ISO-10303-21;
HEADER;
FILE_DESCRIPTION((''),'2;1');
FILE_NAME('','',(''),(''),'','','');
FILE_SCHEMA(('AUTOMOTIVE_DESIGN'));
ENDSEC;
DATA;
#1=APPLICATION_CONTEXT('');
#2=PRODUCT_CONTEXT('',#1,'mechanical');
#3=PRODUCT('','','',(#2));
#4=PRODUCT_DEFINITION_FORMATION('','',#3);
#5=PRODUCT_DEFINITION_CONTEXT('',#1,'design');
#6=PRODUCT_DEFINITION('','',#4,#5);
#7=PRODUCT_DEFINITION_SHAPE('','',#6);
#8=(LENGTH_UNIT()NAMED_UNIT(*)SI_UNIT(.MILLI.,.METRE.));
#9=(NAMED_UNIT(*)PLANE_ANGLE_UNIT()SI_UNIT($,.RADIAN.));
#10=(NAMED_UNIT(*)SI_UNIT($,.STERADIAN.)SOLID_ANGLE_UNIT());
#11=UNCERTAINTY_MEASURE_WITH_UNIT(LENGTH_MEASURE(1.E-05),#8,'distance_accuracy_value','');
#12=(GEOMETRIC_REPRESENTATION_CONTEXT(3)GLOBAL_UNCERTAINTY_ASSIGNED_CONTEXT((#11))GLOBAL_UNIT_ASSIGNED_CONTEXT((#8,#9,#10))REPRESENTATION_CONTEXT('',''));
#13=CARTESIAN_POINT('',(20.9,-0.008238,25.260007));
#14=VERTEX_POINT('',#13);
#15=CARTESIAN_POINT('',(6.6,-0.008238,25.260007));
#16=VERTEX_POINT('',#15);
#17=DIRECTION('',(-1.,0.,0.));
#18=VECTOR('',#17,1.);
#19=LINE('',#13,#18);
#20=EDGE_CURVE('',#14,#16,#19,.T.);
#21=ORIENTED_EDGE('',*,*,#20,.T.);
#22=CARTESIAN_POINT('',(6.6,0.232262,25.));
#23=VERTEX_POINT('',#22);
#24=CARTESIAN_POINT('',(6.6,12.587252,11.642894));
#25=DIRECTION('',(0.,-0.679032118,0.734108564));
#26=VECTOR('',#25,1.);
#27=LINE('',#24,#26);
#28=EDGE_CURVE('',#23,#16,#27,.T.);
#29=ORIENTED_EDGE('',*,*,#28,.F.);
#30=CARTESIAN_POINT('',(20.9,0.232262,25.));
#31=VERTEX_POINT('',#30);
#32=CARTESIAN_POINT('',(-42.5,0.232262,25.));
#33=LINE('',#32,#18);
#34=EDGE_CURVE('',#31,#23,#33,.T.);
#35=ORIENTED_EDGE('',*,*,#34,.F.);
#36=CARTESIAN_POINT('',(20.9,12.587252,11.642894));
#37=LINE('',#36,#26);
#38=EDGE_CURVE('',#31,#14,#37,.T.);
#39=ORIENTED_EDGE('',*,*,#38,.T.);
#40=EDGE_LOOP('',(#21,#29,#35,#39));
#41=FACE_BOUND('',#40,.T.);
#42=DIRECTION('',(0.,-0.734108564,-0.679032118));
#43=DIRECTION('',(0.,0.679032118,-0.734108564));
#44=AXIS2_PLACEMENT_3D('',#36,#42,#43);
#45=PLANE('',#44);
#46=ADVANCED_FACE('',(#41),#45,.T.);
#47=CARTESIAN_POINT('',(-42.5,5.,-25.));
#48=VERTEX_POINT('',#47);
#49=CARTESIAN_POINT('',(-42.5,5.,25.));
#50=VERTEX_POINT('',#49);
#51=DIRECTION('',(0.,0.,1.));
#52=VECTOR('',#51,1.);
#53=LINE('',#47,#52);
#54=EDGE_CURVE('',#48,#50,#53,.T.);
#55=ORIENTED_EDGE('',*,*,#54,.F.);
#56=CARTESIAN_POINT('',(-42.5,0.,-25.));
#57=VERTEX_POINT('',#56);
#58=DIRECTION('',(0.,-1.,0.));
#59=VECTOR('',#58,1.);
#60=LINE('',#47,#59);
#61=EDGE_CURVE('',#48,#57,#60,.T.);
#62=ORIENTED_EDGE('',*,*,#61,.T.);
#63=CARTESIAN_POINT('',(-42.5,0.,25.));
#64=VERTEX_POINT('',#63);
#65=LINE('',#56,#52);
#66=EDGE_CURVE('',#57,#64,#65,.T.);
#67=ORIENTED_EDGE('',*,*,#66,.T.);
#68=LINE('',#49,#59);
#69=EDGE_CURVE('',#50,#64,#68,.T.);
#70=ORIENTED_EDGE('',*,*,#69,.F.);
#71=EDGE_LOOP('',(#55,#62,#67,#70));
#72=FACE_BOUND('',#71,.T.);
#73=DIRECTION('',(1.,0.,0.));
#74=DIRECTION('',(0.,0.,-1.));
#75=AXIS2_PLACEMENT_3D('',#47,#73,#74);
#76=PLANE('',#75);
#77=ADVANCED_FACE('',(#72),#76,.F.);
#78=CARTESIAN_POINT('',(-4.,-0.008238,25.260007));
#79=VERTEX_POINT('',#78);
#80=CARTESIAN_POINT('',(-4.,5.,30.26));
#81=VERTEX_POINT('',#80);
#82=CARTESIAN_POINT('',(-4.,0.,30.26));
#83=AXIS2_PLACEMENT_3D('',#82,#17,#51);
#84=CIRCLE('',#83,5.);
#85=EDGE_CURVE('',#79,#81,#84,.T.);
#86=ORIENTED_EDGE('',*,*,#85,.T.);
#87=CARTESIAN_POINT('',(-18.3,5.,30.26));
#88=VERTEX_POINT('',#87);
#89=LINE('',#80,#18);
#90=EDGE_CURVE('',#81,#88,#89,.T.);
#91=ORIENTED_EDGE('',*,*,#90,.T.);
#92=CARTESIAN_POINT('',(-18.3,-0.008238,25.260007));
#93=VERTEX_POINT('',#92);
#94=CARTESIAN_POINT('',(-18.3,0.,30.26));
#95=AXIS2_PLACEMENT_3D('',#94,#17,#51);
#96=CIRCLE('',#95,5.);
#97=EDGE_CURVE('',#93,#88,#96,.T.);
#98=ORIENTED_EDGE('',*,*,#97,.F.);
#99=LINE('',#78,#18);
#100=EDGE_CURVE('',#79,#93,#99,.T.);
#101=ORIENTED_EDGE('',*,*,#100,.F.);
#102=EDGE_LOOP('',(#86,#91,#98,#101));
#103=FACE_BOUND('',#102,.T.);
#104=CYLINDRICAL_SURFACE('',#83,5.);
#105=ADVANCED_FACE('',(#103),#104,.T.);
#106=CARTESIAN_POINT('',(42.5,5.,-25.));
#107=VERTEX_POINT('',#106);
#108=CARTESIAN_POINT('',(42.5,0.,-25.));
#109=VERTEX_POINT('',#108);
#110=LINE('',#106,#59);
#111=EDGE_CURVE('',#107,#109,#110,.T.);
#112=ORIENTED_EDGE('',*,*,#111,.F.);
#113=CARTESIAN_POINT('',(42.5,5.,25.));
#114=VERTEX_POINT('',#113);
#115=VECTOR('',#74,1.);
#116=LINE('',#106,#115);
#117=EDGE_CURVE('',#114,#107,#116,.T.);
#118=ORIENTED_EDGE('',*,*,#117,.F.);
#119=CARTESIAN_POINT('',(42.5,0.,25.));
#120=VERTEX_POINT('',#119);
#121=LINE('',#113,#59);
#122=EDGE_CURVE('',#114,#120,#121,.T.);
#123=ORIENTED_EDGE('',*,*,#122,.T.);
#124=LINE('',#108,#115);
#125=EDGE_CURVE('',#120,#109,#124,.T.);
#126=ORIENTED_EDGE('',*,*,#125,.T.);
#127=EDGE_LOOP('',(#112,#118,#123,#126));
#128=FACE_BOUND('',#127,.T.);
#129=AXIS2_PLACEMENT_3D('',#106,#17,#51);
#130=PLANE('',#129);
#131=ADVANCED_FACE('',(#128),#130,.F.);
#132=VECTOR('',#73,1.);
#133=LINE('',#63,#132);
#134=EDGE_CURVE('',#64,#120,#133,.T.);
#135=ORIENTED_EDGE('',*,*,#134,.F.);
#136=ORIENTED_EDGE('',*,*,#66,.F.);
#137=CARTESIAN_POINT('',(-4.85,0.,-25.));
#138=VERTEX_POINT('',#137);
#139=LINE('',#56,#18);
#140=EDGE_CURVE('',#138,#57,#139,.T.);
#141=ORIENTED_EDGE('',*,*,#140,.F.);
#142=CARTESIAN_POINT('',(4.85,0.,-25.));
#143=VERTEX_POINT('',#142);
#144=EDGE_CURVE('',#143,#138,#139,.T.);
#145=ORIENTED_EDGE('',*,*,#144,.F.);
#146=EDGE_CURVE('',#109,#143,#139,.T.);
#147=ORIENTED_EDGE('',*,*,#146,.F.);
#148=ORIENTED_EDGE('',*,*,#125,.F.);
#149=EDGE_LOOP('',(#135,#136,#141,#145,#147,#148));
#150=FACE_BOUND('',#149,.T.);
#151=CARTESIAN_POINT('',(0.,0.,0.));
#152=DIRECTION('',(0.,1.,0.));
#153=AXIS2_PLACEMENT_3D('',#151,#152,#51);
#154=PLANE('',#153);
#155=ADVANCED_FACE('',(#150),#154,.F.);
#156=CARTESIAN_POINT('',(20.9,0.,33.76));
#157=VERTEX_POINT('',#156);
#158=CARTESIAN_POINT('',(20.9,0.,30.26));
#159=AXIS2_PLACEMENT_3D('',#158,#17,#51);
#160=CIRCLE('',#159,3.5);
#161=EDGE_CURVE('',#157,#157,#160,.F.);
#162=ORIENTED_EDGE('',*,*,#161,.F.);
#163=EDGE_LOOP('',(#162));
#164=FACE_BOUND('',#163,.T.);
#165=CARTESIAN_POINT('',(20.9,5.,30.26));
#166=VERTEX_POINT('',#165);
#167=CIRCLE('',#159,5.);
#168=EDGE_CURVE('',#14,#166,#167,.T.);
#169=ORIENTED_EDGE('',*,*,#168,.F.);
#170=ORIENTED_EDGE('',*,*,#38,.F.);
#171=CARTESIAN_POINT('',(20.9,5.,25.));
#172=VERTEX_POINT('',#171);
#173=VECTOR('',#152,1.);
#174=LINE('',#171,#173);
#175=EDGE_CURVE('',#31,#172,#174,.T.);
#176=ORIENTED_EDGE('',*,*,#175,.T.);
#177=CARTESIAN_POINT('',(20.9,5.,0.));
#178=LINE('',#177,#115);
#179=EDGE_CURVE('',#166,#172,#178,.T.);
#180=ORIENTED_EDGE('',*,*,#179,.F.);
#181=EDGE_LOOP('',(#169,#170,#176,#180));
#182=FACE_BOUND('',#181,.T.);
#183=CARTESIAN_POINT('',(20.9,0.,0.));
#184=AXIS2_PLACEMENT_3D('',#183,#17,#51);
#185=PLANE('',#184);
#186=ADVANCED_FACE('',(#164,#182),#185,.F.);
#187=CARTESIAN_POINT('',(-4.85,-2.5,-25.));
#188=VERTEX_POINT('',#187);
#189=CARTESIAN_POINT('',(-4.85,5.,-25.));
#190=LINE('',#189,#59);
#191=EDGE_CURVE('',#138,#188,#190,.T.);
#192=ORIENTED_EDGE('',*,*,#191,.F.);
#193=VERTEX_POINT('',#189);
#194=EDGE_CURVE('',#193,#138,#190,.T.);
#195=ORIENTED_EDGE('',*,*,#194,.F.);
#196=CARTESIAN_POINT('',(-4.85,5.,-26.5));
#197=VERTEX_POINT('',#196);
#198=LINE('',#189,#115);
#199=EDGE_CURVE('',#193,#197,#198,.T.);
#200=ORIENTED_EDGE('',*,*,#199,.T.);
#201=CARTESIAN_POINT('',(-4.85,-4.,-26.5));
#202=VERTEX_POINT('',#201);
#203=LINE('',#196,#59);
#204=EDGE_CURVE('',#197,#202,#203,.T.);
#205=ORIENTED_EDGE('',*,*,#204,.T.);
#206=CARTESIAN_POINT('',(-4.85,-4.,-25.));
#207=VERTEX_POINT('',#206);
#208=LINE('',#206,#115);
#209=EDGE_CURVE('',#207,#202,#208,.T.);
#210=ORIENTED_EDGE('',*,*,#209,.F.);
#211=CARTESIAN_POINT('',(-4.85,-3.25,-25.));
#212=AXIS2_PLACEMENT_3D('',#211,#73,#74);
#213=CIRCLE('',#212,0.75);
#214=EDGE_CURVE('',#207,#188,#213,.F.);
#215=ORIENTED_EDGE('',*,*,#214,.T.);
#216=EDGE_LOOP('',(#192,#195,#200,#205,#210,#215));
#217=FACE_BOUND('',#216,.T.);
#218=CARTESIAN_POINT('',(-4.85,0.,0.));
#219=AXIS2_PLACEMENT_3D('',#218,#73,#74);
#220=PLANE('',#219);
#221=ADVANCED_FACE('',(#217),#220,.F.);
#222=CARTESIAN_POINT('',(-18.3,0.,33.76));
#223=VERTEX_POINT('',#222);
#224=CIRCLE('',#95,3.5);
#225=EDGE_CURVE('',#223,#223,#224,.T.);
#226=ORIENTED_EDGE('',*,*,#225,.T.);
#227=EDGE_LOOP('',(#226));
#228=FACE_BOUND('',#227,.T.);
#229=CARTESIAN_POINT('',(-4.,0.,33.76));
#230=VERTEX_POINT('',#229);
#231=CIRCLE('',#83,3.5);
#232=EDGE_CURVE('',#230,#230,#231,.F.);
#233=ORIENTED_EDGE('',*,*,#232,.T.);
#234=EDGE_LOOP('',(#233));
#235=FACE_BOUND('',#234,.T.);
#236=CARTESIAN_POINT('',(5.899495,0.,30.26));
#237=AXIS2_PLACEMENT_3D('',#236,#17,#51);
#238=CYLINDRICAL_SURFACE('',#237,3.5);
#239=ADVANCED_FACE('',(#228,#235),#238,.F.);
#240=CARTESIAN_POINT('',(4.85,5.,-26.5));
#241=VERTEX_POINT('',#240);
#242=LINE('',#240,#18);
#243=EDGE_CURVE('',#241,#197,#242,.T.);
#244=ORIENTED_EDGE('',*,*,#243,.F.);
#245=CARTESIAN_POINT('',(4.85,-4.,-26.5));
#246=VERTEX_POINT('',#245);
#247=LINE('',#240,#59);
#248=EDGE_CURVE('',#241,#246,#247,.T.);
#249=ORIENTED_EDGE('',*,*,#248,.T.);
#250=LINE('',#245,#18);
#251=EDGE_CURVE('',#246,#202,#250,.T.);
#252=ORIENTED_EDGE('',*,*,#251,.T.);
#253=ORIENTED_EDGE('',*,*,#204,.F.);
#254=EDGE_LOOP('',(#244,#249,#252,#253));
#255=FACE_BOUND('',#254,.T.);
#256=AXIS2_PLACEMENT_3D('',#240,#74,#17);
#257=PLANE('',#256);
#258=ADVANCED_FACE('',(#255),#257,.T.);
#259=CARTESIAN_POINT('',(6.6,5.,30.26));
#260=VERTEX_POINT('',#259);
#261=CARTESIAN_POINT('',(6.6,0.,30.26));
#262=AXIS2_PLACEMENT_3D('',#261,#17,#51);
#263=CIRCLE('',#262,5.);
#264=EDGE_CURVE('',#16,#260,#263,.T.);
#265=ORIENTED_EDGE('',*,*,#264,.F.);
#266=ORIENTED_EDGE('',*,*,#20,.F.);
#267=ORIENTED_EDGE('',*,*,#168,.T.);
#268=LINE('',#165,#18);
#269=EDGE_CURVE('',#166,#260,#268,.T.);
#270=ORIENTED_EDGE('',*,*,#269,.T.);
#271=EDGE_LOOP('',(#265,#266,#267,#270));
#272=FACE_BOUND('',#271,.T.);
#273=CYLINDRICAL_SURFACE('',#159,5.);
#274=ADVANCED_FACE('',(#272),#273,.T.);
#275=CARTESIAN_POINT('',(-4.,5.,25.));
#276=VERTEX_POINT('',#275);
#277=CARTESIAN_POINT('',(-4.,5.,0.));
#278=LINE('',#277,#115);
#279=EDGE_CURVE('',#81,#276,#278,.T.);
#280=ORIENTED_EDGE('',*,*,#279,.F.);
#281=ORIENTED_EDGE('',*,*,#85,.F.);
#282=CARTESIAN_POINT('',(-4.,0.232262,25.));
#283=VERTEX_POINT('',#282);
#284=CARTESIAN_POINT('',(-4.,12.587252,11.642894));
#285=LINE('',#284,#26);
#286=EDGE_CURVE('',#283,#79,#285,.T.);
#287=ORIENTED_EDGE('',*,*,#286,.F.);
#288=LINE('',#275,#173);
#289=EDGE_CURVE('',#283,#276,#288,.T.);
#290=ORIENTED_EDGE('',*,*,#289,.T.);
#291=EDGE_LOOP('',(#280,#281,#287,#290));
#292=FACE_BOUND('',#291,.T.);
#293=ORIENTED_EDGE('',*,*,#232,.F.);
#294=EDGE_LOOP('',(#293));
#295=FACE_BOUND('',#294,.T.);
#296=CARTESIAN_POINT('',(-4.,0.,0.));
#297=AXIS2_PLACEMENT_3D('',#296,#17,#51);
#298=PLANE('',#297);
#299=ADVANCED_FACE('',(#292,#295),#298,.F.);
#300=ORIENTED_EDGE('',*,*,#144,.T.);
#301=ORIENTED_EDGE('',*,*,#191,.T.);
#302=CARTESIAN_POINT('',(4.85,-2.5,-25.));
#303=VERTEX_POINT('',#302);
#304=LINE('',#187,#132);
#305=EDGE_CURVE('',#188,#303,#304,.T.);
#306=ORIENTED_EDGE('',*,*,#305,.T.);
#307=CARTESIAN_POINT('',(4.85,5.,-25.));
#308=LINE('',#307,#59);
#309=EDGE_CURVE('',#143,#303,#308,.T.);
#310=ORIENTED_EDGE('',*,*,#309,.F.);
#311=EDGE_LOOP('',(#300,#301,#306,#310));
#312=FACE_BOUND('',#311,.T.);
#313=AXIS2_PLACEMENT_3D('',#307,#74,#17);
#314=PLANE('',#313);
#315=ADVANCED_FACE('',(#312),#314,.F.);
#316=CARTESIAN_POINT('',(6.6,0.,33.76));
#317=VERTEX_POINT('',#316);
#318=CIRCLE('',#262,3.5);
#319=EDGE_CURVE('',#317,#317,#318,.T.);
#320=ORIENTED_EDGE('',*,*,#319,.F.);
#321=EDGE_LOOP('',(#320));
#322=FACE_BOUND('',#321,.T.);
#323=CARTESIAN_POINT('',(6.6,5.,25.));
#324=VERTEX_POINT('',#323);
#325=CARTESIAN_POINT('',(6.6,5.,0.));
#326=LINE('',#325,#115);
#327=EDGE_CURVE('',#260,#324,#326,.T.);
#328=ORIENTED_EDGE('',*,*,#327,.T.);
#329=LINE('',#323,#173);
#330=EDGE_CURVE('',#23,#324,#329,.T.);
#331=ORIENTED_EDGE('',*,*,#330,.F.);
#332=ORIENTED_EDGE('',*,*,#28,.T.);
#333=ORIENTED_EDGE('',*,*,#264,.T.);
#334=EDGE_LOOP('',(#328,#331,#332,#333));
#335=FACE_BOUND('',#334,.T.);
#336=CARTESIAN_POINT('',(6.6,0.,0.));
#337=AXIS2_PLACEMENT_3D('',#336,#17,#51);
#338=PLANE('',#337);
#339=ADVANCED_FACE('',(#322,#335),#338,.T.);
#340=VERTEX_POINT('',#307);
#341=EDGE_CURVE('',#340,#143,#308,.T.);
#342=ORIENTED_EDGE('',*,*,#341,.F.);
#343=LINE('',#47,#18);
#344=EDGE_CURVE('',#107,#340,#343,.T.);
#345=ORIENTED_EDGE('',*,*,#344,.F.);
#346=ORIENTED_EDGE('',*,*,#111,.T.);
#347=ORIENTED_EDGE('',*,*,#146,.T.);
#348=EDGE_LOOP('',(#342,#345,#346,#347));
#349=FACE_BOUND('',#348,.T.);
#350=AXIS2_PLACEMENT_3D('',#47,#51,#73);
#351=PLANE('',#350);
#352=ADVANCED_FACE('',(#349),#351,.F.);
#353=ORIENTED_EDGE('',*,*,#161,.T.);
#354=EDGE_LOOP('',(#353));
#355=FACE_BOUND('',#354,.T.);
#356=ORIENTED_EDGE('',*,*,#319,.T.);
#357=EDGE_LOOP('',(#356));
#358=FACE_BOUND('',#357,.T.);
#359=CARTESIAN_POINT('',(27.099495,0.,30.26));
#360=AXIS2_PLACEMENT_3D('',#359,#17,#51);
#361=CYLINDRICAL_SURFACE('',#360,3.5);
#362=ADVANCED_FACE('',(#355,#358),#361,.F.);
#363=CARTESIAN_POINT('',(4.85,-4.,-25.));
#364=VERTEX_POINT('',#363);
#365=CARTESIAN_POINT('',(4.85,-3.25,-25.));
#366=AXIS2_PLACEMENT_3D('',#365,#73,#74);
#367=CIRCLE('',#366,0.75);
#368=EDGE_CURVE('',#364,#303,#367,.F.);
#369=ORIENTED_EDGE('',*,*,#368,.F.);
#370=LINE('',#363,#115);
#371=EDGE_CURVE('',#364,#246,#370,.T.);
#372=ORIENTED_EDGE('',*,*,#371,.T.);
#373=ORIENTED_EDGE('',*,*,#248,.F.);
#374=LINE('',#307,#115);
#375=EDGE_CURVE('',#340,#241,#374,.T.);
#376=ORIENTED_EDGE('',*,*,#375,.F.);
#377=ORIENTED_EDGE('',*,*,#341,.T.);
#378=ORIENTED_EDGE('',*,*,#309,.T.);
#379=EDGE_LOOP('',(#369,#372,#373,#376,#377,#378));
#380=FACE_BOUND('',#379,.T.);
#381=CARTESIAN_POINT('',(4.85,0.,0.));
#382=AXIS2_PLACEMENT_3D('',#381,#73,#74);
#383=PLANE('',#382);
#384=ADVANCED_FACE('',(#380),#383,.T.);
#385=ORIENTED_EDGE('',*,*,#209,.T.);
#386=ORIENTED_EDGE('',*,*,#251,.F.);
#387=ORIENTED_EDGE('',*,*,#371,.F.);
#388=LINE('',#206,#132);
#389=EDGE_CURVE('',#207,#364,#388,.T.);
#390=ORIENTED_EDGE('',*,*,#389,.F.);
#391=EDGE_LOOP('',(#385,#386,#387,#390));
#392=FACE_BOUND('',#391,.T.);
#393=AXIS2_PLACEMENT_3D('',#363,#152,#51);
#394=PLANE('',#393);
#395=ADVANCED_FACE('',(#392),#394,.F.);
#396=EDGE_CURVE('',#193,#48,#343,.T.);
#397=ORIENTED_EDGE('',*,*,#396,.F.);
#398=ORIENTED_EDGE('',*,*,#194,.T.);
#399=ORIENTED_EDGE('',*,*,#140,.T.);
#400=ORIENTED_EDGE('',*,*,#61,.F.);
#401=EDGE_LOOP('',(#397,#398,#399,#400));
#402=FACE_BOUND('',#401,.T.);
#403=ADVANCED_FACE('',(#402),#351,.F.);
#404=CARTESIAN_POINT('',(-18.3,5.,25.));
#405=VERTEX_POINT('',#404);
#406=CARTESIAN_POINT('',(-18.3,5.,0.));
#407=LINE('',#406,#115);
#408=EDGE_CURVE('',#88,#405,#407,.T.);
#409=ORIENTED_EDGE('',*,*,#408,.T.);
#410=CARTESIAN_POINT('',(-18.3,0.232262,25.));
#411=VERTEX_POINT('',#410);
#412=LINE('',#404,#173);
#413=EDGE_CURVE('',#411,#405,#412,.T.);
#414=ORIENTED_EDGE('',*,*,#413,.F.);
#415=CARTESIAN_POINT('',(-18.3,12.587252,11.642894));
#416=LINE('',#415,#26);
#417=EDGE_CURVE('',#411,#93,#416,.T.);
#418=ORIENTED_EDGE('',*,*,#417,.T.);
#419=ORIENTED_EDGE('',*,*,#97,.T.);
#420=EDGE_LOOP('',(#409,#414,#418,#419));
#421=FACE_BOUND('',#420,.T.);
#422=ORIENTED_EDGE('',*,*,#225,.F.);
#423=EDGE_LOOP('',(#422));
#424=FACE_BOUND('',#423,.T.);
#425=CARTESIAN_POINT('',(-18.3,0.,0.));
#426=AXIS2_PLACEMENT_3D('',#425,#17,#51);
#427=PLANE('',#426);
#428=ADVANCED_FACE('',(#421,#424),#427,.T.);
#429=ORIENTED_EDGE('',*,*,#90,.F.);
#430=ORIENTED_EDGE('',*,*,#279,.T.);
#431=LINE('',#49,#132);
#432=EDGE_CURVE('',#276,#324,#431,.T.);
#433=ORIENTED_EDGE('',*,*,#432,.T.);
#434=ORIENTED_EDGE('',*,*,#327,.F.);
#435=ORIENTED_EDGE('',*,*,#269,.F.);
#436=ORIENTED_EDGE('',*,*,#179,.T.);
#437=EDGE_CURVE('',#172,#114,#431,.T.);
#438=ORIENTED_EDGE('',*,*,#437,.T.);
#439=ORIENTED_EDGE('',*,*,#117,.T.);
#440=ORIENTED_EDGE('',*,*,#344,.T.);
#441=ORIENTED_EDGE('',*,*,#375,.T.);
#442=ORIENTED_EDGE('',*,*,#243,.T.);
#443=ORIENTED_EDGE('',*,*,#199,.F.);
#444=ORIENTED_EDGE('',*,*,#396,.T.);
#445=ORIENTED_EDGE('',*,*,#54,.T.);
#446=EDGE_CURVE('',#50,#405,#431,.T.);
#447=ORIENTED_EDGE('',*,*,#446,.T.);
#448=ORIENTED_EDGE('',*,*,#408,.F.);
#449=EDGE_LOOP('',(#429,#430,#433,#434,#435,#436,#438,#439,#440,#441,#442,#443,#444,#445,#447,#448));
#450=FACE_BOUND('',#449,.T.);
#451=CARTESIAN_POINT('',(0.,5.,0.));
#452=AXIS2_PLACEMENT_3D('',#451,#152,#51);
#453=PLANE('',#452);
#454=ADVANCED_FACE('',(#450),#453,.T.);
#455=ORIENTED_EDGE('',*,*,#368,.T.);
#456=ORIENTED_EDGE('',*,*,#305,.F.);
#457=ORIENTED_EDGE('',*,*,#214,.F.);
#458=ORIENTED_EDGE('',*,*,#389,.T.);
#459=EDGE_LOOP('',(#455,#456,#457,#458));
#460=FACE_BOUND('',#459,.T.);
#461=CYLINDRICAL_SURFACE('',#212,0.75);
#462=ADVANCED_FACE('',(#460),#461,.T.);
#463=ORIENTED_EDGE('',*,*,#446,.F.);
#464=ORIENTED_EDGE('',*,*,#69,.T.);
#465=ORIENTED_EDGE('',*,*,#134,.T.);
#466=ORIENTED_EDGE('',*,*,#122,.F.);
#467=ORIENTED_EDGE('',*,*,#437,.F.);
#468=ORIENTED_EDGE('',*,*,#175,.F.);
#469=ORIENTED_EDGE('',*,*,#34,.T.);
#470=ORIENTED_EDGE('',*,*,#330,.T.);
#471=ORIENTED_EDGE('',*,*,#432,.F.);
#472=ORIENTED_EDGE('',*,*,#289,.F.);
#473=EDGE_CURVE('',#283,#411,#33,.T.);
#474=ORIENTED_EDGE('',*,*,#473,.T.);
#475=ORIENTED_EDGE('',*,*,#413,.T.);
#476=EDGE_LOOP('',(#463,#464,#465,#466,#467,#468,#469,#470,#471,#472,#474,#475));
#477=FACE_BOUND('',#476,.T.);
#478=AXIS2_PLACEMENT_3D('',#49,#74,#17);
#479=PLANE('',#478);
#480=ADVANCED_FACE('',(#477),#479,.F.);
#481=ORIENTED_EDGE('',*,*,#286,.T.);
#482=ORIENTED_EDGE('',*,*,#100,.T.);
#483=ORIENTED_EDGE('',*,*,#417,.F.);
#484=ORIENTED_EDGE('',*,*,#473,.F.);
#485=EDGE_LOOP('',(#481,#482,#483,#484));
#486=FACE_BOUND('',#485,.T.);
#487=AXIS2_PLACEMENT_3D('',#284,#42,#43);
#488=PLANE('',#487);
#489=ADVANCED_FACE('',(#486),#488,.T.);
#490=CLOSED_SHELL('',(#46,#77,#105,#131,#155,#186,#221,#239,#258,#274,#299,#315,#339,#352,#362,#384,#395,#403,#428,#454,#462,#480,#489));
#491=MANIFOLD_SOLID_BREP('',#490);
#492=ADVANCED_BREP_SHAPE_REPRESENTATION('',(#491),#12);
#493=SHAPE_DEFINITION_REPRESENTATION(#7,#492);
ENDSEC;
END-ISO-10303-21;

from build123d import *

# Parameters (mm, degrees)
ESQUISSE1_W                = 85
ESQUISSE1_H                = 50
BOSS_EXTRU_1_DEPTH         = 5
BOSS_EXTRU_2_START         = -14.3
BOSS_EXTRU_2_DEPTH         = 14.3
ESQUISSE3_R                = 3.5
ENL_V_MAT_EXTRU_1_DEPTH    = 14.3
R_P_TITION_LIN_AIRE2_COUNT = 2
R_P_TITION_LIN_AIRE2_PITCH = 24.9
BOSS_EXTRU_3_DEPTH         = 4.85
BOSS_EXTRU_3_DEPTH_BACK    = 4.85


# Read off the part's stored shape, not the designer's step: Boss.-Extru.2
with BuildPart() as part:
    # Esquisse1 → Boss.-Extru.1 (new body)
    with BuildSketch(Plane(origin=(0, 0, 0), x_dir=(1, 0, 0), z_dir=(0, 1, 0))):
        Rectangle(ESQUISSE1_W, ESQUISSE1_H)
    extrude(amount=BOSS_EXTRU_1_DEPTH)

    # Boss.-Extru.2 outline → Boss.-Extru.2 (add)
    with BuildSketch(Plane.ZY.offset(18.3).offset(BOSS_EXTRU_2_START)):
        with BuildLine():
            Line((25, 5), (25, 0.23226176))
            Line((25, 0.23226176), (25.260006787, -0.008238034))
            ThreePointArc((25.260006787, -0.008238034), (33.798445292, -3.53262012), (30.26, 5))
            Line((30.26, 5), (25, 5))
        make_face()
    boss_extru_2 = extrude(amount=BOSS_EXTRU_2_DEPTH)

    # Esquisse3 → Enlèv. mat.-Extru.1 (cut)
    with BuildSketch(Plane.ZY.offset(18.3)):
        with Locations((30.26, 0)):
            Circle(ESQUISSE3_R)
    enl_v_mat_extru_1 = extrude(amount=-ENL_V_MAT_EXTRU_1_DEPTH, mode=Mode.SUBTRACT)

    # Répétition linéaire2: Boss.-Extru.2, Enlèv. mat.-Extru.1 ×2
    with Locations(*[(i * R_P_TITION_LIN_AIRE2_PITCH, 0, 0) for i in range(1, R_P_TITION_LIN_AIRE2_COUNT)]):
        add(boss_extru_2)
        add(enl_v_mat_extru_1, mode=Mode.SUBTRACT)

    # Esquisse4 → Boss.-Extru.3 (add, two sides: drawn at the far end of the back side and taken through both)
    with BuildSketch(Plane(origin=(0, 0, 0), x_dir=(0, 0, -1), z_dir=(1, 0, 0)).offset(-BOSS_EXTRU_3_DEPTH_BACK)):
        with BuildLine():
            Line((26.5, 5), (25, 5))
            Line((25, 5), (25, -2.5))
            ThreePointArc((25, -2.5), (24.25, -3.25), (25, -4))
            Line((25, -4), (26.5, -4))
            Line((26.5, -4), (26.5, 5))
        make_face()
    extrude(amount=BOSS_EXTRU_3_DEPTH + BOSS_EXTRU_3_DEPTH_BACK)


solid = part.part
